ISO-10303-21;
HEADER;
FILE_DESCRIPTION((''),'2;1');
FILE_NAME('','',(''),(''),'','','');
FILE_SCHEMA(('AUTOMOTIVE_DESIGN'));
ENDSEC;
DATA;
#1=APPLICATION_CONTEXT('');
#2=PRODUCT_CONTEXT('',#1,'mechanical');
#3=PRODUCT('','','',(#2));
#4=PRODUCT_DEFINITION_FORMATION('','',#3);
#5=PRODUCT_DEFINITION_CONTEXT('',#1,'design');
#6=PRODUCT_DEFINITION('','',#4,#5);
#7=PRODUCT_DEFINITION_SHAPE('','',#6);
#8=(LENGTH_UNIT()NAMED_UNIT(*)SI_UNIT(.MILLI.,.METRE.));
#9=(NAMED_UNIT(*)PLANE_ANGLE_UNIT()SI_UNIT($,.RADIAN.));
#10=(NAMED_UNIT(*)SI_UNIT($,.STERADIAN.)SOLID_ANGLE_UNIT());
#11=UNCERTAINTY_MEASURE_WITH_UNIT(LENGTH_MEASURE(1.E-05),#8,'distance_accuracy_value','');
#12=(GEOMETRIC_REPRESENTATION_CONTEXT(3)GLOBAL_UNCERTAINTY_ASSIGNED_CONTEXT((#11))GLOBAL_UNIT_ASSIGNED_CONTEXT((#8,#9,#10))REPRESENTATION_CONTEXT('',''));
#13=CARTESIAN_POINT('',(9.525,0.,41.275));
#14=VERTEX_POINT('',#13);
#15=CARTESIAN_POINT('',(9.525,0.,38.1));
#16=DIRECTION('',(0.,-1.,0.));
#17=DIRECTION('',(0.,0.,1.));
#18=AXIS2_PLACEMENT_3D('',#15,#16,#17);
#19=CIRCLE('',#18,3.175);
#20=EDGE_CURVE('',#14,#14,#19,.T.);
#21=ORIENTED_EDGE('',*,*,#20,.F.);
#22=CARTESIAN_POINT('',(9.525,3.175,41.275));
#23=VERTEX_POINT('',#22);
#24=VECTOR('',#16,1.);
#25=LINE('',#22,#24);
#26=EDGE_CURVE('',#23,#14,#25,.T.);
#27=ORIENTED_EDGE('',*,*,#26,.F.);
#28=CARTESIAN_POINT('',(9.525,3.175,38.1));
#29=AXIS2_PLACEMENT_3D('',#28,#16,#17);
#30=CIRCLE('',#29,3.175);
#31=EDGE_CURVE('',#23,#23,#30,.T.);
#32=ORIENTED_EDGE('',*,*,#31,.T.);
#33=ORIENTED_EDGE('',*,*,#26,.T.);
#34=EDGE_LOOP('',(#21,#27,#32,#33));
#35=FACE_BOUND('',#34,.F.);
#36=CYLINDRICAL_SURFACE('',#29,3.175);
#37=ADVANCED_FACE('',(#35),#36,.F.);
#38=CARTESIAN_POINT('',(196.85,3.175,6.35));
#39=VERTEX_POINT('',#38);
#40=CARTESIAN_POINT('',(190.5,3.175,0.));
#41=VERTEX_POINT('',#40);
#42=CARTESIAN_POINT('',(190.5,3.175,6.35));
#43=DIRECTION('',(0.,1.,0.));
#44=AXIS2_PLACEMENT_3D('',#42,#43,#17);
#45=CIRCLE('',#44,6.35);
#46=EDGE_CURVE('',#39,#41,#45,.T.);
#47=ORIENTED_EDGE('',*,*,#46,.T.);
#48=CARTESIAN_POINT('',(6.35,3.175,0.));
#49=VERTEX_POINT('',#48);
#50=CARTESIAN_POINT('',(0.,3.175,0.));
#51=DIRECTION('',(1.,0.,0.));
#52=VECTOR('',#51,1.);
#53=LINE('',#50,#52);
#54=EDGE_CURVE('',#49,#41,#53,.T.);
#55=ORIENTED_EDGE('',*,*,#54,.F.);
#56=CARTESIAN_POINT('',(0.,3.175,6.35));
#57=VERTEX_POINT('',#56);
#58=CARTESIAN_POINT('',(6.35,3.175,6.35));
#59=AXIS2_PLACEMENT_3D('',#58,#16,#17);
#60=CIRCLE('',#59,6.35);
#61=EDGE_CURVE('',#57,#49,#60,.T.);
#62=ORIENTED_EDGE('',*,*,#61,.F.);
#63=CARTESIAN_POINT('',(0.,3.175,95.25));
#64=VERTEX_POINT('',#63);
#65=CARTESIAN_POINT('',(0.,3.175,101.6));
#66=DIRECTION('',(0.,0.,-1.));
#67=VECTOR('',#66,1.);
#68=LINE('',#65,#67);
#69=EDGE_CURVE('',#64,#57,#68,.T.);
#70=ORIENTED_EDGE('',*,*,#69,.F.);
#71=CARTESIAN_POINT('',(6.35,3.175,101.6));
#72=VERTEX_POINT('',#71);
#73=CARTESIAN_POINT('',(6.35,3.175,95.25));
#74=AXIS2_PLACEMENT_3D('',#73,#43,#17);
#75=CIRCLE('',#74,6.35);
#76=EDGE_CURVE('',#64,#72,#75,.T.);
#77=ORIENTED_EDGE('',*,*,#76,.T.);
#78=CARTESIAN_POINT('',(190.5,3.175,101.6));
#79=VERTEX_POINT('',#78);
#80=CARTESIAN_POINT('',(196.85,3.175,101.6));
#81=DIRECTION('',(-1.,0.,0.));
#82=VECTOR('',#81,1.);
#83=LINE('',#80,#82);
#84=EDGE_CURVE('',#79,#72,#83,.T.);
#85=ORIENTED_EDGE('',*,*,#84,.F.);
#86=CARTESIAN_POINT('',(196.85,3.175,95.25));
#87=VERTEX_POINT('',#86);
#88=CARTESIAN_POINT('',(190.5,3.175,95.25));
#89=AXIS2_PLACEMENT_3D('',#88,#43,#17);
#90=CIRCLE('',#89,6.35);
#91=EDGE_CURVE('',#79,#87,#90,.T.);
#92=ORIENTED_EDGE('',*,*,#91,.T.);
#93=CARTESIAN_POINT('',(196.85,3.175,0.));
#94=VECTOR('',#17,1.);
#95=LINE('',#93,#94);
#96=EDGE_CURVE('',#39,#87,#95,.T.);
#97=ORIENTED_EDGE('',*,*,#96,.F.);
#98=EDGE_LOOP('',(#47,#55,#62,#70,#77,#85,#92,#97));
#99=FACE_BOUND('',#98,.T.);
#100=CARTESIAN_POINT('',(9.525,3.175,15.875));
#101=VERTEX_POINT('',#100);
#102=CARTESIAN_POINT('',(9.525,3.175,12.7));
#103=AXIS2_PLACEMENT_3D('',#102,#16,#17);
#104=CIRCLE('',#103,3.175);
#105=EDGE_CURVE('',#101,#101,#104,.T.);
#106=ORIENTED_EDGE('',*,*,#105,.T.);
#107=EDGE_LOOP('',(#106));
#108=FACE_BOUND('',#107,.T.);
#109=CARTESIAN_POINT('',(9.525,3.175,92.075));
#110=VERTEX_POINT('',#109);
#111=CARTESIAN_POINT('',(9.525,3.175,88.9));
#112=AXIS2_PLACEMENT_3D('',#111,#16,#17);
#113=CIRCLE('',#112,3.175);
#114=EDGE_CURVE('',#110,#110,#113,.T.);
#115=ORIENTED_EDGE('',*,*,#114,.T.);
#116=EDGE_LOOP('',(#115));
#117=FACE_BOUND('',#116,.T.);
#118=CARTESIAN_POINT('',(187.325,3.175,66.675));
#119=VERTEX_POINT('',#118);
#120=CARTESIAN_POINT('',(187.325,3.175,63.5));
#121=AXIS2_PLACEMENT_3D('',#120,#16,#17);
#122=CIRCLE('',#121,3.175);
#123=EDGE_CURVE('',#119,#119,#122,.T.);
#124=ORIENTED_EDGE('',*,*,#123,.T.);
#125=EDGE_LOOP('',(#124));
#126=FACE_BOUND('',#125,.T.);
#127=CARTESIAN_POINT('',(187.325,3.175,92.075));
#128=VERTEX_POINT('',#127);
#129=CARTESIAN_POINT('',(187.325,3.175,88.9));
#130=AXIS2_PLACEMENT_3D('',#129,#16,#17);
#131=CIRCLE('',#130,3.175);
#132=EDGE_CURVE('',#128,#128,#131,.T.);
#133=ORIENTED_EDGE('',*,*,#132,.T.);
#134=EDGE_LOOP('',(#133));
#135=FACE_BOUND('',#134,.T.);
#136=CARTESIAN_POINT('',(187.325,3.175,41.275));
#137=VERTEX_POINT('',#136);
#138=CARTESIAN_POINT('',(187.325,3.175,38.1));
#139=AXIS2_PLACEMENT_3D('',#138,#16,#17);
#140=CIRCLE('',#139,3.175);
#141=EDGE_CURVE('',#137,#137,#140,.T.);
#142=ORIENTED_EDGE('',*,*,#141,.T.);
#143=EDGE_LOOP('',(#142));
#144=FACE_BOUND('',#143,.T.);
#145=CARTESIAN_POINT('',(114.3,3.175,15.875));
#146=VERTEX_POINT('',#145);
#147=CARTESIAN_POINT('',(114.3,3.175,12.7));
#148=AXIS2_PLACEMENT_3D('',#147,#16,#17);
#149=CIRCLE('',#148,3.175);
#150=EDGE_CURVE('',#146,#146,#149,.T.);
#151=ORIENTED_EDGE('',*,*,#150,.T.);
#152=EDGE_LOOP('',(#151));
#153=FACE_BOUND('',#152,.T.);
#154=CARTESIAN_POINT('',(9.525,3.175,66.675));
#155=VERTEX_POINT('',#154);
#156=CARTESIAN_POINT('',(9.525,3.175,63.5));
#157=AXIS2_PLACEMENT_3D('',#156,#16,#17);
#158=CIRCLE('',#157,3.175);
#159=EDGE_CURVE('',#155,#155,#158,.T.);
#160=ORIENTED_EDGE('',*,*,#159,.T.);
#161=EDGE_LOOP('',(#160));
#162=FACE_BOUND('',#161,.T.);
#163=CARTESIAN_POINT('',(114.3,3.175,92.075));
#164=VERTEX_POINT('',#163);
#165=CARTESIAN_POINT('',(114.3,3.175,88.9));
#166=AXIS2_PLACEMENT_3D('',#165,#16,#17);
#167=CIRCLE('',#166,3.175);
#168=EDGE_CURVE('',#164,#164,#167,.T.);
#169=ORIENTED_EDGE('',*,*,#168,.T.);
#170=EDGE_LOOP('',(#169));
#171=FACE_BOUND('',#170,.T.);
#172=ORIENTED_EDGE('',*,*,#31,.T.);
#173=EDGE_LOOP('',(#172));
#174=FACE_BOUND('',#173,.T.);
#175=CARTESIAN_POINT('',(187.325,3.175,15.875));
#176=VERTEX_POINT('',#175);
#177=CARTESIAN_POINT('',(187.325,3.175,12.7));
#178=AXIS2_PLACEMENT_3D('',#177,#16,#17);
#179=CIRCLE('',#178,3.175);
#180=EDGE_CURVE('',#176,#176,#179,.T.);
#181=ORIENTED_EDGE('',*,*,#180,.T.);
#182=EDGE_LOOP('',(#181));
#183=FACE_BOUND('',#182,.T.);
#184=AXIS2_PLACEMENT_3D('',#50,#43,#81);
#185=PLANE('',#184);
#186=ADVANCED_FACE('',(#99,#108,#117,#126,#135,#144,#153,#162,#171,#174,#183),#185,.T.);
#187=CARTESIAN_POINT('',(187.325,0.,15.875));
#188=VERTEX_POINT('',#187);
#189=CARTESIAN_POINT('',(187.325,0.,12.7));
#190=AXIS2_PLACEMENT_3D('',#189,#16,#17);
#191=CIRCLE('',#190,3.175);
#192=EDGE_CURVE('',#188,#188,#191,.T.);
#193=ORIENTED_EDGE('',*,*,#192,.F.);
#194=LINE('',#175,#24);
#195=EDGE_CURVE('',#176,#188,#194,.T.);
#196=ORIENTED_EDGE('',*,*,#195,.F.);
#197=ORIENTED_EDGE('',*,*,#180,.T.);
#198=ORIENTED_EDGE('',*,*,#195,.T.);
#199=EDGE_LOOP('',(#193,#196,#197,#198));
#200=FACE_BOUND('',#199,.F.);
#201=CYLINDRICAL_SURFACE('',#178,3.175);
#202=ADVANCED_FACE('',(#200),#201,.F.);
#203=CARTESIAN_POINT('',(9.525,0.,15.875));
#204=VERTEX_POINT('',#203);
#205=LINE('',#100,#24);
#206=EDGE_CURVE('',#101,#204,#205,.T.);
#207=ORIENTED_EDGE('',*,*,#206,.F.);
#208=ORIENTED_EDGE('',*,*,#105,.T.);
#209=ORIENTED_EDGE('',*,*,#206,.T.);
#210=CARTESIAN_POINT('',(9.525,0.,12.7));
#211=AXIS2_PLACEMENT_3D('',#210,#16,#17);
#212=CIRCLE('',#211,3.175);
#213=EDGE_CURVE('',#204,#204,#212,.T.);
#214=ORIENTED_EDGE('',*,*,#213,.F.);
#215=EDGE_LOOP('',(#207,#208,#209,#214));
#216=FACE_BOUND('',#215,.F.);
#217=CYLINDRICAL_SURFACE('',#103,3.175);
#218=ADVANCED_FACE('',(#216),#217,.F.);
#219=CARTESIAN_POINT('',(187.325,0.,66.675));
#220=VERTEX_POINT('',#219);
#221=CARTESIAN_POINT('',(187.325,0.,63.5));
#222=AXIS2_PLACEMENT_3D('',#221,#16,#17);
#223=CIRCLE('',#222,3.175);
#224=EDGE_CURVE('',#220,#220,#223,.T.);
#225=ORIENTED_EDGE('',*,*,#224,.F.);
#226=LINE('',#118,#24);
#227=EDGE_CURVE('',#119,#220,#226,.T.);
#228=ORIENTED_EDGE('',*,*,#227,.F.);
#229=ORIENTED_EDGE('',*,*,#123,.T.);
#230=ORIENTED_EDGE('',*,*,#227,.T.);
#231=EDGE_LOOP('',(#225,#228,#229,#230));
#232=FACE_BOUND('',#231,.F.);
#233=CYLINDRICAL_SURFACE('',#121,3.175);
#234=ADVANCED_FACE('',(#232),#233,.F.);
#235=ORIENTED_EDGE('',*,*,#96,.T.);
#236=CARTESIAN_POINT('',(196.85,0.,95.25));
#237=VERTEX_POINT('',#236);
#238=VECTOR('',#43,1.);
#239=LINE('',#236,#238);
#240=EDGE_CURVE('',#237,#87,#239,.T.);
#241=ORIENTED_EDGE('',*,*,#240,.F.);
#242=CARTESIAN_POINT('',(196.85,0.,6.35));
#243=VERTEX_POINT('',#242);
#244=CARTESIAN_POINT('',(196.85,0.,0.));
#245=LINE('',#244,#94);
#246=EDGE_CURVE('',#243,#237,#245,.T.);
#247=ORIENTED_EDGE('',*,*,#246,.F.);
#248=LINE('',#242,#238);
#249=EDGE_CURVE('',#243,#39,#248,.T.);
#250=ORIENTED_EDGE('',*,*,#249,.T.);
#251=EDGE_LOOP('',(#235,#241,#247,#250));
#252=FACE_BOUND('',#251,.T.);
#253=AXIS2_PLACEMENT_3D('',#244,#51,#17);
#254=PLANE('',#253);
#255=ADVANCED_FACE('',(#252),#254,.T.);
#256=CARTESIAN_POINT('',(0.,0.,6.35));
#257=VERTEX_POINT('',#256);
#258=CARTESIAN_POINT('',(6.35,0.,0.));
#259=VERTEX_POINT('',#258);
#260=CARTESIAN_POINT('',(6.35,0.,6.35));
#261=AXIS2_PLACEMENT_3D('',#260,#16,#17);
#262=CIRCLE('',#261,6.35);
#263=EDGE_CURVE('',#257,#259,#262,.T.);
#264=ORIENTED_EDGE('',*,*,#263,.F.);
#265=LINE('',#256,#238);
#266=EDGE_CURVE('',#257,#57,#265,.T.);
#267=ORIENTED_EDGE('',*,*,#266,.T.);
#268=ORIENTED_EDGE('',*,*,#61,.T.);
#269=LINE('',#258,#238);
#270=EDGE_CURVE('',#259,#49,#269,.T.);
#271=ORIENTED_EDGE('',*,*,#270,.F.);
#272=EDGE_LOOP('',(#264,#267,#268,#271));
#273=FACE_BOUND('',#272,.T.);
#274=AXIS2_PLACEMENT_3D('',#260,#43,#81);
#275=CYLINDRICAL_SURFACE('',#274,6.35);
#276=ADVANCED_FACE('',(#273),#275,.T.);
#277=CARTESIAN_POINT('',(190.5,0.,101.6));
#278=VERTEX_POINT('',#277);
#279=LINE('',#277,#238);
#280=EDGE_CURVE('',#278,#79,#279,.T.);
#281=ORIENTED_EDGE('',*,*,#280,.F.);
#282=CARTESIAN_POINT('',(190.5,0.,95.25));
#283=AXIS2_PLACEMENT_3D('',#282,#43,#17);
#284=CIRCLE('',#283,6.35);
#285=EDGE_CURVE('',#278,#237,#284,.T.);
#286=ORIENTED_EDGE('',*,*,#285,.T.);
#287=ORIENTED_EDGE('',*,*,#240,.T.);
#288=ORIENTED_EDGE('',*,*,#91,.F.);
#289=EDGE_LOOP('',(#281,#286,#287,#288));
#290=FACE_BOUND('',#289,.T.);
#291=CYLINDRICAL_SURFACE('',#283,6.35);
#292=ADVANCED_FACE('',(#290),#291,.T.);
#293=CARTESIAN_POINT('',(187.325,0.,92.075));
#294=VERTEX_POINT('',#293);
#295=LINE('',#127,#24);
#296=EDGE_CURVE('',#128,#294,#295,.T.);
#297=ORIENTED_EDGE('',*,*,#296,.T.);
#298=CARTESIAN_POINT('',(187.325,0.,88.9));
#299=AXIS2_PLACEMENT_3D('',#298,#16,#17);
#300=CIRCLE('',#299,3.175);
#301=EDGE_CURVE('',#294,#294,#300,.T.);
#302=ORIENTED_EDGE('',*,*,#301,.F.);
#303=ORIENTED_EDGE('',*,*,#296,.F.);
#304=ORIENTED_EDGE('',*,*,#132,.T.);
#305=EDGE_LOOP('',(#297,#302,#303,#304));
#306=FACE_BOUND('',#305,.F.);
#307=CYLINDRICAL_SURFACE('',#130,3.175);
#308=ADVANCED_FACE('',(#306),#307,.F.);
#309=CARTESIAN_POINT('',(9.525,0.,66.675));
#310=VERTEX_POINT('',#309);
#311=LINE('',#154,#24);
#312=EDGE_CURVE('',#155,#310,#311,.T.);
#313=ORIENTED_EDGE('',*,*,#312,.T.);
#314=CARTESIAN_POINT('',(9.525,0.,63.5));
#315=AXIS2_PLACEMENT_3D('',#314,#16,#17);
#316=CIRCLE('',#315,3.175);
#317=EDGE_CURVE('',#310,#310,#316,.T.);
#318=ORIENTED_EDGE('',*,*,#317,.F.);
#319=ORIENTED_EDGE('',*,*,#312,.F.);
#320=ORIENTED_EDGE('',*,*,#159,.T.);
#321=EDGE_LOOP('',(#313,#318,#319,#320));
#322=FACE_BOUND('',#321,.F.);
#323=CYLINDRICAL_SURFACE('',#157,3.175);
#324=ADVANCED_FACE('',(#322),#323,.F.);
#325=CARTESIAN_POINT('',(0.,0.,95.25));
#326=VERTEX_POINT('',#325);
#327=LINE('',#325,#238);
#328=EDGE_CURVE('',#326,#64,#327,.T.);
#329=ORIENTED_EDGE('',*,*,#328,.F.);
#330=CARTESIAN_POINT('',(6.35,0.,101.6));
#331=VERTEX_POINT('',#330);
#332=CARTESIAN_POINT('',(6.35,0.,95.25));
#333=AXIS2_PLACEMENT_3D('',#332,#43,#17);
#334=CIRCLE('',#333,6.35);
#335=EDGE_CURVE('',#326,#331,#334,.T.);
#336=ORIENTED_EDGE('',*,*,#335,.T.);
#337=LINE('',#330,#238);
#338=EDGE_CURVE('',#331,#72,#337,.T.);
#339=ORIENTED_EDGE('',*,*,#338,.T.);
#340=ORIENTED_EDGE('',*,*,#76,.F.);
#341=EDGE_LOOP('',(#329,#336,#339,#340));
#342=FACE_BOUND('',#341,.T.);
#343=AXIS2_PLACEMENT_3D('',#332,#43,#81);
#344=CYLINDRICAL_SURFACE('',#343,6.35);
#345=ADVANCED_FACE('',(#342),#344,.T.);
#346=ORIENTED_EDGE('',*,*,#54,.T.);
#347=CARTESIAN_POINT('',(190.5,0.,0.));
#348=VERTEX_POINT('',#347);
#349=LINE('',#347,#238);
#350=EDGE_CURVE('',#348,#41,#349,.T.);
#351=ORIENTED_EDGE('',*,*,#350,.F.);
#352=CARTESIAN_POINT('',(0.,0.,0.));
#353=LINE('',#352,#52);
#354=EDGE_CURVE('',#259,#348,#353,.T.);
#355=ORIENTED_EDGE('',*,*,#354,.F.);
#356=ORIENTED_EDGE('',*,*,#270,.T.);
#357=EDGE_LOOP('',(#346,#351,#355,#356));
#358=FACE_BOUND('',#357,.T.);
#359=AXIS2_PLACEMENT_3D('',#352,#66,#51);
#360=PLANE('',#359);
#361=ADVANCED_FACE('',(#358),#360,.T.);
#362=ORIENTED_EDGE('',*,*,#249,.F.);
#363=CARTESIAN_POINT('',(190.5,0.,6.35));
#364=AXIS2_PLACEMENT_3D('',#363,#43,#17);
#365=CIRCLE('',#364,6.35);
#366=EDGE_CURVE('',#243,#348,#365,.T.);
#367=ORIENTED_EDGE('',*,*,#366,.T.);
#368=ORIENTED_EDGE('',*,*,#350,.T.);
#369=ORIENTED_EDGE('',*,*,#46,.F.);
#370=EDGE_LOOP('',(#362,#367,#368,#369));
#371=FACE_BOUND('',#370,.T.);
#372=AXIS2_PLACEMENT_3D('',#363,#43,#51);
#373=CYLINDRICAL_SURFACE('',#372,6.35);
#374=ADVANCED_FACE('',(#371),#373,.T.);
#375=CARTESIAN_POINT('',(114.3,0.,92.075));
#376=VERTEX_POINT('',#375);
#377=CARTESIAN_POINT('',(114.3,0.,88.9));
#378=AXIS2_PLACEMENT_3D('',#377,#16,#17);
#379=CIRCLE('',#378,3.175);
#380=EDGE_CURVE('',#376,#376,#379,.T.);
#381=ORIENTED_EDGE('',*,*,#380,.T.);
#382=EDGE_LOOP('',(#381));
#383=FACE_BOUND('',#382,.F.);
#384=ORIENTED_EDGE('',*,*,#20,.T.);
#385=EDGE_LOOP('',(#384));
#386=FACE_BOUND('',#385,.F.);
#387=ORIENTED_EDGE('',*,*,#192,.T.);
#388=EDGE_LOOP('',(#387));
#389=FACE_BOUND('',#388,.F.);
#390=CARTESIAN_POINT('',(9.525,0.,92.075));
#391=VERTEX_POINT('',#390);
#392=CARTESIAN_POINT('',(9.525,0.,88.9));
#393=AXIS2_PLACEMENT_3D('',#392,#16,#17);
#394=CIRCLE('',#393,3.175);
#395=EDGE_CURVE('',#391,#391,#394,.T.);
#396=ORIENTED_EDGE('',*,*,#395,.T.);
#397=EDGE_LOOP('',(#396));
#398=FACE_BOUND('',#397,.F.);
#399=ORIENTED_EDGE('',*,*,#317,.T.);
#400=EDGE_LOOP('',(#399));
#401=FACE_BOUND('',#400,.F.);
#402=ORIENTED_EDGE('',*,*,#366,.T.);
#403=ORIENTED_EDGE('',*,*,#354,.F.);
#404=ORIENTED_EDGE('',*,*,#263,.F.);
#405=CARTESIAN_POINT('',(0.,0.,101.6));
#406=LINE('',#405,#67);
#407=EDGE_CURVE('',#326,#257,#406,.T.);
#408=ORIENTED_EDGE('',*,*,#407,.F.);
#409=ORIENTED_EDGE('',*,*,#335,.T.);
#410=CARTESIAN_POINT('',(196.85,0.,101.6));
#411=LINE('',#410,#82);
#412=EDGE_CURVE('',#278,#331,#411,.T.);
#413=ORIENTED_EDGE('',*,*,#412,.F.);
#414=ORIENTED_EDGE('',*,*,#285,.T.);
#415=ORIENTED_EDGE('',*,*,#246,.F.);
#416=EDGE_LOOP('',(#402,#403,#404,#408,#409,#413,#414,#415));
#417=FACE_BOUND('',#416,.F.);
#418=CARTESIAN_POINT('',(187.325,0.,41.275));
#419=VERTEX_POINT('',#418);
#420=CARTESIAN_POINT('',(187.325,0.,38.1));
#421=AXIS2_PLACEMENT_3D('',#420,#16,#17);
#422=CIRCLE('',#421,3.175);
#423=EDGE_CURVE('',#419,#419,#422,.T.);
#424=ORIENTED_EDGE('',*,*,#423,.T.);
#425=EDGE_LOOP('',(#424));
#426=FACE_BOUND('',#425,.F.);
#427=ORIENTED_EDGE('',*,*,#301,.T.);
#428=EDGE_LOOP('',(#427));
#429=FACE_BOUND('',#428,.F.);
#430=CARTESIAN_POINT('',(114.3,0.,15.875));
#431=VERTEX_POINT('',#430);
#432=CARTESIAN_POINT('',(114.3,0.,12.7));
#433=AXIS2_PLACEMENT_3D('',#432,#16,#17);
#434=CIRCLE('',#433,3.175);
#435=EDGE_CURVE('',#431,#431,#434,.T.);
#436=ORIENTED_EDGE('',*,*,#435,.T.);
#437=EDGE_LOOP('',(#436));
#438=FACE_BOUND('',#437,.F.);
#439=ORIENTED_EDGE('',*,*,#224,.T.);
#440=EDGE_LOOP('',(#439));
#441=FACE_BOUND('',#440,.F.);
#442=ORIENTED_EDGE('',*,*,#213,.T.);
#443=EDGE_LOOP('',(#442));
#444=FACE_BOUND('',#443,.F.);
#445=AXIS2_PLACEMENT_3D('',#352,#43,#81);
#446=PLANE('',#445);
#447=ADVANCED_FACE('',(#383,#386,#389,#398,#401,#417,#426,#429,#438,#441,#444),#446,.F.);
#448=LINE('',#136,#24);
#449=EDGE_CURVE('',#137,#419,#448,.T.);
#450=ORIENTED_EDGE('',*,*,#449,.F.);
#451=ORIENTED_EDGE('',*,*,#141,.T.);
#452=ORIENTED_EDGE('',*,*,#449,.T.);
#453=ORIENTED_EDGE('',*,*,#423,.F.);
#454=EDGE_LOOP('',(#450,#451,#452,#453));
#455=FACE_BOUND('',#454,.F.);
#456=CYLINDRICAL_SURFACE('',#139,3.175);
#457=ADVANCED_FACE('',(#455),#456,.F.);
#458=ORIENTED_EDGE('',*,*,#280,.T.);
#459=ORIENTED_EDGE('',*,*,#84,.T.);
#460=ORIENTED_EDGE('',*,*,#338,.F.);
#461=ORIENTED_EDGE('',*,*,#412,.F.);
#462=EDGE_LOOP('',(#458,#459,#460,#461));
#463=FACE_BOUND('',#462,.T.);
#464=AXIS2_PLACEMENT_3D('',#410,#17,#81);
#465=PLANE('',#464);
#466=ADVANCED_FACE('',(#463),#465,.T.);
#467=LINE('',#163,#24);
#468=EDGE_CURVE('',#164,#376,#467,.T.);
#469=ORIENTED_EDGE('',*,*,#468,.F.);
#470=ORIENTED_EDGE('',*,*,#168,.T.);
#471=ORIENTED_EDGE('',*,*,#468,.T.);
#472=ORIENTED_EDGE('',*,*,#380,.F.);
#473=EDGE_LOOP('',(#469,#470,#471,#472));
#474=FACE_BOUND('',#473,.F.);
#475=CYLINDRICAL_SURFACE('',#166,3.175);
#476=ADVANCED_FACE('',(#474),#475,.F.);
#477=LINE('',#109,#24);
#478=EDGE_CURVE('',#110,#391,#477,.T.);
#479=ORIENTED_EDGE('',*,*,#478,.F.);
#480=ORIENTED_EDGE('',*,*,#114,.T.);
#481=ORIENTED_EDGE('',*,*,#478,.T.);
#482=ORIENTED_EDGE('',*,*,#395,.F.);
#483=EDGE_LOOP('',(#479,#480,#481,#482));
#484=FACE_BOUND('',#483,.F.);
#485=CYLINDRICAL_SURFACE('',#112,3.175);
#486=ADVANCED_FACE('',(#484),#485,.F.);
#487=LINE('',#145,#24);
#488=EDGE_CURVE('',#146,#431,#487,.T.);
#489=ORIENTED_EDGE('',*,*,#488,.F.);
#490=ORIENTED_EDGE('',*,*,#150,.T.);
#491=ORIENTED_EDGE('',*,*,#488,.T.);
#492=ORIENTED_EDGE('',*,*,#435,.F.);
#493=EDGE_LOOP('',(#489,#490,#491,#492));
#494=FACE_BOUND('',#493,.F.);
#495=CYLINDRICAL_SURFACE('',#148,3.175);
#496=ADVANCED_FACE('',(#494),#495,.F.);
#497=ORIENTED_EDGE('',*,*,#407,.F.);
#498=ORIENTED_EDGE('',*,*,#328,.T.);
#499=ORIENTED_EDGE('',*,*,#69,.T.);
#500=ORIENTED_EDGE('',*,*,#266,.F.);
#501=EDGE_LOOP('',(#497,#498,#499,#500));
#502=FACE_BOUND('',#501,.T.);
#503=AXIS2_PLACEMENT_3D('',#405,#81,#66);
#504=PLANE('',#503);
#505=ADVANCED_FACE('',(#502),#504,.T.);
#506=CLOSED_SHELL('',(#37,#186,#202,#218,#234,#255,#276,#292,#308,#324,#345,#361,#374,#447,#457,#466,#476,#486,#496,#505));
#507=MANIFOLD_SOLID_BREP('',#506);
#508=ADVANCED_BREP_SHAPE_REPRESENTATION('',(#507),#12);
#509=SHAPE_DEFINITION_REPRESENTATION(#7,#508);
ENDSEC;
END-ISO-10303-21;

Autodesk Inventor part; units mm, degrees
ref_plane "YZ Plane" through (0, 0, 0) normal (1, 0, 0) x (0, 1, 0)
ref_plane "XZ Plane" through (0, 0, 0) normal (0, 1, 0) x (-1, 0, 0)
ref_plane "XY Plane" through (0, 0, 0) normal (0, 0, 1) x (1, 0, 0)
sketch "Sketch1" plane through (0, 0, 0) normal (0, 1, 0) x (-1, 0, 0)
  line L0 (0, 0) -> (-196.85, 0)
  line L1 (-196.85, 0) -> (-196.85, 101.6)
  line L2 (-196.85, 101.6) -> (0, 101.6)
  line L3 (0, 101.6) -> (0, 0)
  dimension "d0" = 196.85
  dimension "d1" = 101.6
extrude "Plate1" add sketch "Sketch1" along normal blind 3.175
hole "Hole1" at (9.525, 3.175, 12.7) direction (0, -1, 0) diameter 6.35 end through all
hole "Hole2" at (187.325, 3.175, 12.7) direction (0, -1, 0) diameter 6.35 end through all
pattern_linear "Rectangular Pattern1" count 4 spacing 25.4 along (0, 0, 1) of "Hole1"
pattern_linear "Rectangular Pattern2" count 4 spacing 25.4 along (0, 0, 1) of "Hole2"
fillet "Fillet1" radius 6.35 1 edges at (0, 1.5875, 101.6)
fillet "Fillet2" radius 6.35 1 edges at (0, 1.5875, 0)
fillet "Fillet3" radius 6.35 1 edges at (196.85, 1.5875, 101.6)
fillet "Fillet4" radius 6.35 1 edges at (196.85, 1.5875, 0)
hole "Hole3" at (114.3, 3.175, 12.7) direction (0, -1, 0) diameter 6.35 end through all
pattern_linear "Rectangular Pattern3" count 2 spacing 76.2 along (0, 0, 1) of "Hole3"
equation "\"d10\" = Thickness"
equation "\"d19\" = Thickness"
equation "\"d38\" = Thickness"
equation "\"BendRadius\" = Thickness"
equation "\"BendReliefWidth\" = Thickness"
equation "\"BendReliefDepth\" = 0.5 * Thickness"
equation "\"CornerReliefSize\" = 4 * Thickness"
equation "\"MinimumRemnant\" = 2 * Thickness"
equation "\"TransitionRadius\" = BendRadius"
equation "\"JacobiRadiusSize\" = BendRadius"
equation "\"GapSize\" = Thickness"
equation "\"d2\" = BendRadius"
equation "\"Thickness\" = 3.175"
properties part number "Motor Mount"
